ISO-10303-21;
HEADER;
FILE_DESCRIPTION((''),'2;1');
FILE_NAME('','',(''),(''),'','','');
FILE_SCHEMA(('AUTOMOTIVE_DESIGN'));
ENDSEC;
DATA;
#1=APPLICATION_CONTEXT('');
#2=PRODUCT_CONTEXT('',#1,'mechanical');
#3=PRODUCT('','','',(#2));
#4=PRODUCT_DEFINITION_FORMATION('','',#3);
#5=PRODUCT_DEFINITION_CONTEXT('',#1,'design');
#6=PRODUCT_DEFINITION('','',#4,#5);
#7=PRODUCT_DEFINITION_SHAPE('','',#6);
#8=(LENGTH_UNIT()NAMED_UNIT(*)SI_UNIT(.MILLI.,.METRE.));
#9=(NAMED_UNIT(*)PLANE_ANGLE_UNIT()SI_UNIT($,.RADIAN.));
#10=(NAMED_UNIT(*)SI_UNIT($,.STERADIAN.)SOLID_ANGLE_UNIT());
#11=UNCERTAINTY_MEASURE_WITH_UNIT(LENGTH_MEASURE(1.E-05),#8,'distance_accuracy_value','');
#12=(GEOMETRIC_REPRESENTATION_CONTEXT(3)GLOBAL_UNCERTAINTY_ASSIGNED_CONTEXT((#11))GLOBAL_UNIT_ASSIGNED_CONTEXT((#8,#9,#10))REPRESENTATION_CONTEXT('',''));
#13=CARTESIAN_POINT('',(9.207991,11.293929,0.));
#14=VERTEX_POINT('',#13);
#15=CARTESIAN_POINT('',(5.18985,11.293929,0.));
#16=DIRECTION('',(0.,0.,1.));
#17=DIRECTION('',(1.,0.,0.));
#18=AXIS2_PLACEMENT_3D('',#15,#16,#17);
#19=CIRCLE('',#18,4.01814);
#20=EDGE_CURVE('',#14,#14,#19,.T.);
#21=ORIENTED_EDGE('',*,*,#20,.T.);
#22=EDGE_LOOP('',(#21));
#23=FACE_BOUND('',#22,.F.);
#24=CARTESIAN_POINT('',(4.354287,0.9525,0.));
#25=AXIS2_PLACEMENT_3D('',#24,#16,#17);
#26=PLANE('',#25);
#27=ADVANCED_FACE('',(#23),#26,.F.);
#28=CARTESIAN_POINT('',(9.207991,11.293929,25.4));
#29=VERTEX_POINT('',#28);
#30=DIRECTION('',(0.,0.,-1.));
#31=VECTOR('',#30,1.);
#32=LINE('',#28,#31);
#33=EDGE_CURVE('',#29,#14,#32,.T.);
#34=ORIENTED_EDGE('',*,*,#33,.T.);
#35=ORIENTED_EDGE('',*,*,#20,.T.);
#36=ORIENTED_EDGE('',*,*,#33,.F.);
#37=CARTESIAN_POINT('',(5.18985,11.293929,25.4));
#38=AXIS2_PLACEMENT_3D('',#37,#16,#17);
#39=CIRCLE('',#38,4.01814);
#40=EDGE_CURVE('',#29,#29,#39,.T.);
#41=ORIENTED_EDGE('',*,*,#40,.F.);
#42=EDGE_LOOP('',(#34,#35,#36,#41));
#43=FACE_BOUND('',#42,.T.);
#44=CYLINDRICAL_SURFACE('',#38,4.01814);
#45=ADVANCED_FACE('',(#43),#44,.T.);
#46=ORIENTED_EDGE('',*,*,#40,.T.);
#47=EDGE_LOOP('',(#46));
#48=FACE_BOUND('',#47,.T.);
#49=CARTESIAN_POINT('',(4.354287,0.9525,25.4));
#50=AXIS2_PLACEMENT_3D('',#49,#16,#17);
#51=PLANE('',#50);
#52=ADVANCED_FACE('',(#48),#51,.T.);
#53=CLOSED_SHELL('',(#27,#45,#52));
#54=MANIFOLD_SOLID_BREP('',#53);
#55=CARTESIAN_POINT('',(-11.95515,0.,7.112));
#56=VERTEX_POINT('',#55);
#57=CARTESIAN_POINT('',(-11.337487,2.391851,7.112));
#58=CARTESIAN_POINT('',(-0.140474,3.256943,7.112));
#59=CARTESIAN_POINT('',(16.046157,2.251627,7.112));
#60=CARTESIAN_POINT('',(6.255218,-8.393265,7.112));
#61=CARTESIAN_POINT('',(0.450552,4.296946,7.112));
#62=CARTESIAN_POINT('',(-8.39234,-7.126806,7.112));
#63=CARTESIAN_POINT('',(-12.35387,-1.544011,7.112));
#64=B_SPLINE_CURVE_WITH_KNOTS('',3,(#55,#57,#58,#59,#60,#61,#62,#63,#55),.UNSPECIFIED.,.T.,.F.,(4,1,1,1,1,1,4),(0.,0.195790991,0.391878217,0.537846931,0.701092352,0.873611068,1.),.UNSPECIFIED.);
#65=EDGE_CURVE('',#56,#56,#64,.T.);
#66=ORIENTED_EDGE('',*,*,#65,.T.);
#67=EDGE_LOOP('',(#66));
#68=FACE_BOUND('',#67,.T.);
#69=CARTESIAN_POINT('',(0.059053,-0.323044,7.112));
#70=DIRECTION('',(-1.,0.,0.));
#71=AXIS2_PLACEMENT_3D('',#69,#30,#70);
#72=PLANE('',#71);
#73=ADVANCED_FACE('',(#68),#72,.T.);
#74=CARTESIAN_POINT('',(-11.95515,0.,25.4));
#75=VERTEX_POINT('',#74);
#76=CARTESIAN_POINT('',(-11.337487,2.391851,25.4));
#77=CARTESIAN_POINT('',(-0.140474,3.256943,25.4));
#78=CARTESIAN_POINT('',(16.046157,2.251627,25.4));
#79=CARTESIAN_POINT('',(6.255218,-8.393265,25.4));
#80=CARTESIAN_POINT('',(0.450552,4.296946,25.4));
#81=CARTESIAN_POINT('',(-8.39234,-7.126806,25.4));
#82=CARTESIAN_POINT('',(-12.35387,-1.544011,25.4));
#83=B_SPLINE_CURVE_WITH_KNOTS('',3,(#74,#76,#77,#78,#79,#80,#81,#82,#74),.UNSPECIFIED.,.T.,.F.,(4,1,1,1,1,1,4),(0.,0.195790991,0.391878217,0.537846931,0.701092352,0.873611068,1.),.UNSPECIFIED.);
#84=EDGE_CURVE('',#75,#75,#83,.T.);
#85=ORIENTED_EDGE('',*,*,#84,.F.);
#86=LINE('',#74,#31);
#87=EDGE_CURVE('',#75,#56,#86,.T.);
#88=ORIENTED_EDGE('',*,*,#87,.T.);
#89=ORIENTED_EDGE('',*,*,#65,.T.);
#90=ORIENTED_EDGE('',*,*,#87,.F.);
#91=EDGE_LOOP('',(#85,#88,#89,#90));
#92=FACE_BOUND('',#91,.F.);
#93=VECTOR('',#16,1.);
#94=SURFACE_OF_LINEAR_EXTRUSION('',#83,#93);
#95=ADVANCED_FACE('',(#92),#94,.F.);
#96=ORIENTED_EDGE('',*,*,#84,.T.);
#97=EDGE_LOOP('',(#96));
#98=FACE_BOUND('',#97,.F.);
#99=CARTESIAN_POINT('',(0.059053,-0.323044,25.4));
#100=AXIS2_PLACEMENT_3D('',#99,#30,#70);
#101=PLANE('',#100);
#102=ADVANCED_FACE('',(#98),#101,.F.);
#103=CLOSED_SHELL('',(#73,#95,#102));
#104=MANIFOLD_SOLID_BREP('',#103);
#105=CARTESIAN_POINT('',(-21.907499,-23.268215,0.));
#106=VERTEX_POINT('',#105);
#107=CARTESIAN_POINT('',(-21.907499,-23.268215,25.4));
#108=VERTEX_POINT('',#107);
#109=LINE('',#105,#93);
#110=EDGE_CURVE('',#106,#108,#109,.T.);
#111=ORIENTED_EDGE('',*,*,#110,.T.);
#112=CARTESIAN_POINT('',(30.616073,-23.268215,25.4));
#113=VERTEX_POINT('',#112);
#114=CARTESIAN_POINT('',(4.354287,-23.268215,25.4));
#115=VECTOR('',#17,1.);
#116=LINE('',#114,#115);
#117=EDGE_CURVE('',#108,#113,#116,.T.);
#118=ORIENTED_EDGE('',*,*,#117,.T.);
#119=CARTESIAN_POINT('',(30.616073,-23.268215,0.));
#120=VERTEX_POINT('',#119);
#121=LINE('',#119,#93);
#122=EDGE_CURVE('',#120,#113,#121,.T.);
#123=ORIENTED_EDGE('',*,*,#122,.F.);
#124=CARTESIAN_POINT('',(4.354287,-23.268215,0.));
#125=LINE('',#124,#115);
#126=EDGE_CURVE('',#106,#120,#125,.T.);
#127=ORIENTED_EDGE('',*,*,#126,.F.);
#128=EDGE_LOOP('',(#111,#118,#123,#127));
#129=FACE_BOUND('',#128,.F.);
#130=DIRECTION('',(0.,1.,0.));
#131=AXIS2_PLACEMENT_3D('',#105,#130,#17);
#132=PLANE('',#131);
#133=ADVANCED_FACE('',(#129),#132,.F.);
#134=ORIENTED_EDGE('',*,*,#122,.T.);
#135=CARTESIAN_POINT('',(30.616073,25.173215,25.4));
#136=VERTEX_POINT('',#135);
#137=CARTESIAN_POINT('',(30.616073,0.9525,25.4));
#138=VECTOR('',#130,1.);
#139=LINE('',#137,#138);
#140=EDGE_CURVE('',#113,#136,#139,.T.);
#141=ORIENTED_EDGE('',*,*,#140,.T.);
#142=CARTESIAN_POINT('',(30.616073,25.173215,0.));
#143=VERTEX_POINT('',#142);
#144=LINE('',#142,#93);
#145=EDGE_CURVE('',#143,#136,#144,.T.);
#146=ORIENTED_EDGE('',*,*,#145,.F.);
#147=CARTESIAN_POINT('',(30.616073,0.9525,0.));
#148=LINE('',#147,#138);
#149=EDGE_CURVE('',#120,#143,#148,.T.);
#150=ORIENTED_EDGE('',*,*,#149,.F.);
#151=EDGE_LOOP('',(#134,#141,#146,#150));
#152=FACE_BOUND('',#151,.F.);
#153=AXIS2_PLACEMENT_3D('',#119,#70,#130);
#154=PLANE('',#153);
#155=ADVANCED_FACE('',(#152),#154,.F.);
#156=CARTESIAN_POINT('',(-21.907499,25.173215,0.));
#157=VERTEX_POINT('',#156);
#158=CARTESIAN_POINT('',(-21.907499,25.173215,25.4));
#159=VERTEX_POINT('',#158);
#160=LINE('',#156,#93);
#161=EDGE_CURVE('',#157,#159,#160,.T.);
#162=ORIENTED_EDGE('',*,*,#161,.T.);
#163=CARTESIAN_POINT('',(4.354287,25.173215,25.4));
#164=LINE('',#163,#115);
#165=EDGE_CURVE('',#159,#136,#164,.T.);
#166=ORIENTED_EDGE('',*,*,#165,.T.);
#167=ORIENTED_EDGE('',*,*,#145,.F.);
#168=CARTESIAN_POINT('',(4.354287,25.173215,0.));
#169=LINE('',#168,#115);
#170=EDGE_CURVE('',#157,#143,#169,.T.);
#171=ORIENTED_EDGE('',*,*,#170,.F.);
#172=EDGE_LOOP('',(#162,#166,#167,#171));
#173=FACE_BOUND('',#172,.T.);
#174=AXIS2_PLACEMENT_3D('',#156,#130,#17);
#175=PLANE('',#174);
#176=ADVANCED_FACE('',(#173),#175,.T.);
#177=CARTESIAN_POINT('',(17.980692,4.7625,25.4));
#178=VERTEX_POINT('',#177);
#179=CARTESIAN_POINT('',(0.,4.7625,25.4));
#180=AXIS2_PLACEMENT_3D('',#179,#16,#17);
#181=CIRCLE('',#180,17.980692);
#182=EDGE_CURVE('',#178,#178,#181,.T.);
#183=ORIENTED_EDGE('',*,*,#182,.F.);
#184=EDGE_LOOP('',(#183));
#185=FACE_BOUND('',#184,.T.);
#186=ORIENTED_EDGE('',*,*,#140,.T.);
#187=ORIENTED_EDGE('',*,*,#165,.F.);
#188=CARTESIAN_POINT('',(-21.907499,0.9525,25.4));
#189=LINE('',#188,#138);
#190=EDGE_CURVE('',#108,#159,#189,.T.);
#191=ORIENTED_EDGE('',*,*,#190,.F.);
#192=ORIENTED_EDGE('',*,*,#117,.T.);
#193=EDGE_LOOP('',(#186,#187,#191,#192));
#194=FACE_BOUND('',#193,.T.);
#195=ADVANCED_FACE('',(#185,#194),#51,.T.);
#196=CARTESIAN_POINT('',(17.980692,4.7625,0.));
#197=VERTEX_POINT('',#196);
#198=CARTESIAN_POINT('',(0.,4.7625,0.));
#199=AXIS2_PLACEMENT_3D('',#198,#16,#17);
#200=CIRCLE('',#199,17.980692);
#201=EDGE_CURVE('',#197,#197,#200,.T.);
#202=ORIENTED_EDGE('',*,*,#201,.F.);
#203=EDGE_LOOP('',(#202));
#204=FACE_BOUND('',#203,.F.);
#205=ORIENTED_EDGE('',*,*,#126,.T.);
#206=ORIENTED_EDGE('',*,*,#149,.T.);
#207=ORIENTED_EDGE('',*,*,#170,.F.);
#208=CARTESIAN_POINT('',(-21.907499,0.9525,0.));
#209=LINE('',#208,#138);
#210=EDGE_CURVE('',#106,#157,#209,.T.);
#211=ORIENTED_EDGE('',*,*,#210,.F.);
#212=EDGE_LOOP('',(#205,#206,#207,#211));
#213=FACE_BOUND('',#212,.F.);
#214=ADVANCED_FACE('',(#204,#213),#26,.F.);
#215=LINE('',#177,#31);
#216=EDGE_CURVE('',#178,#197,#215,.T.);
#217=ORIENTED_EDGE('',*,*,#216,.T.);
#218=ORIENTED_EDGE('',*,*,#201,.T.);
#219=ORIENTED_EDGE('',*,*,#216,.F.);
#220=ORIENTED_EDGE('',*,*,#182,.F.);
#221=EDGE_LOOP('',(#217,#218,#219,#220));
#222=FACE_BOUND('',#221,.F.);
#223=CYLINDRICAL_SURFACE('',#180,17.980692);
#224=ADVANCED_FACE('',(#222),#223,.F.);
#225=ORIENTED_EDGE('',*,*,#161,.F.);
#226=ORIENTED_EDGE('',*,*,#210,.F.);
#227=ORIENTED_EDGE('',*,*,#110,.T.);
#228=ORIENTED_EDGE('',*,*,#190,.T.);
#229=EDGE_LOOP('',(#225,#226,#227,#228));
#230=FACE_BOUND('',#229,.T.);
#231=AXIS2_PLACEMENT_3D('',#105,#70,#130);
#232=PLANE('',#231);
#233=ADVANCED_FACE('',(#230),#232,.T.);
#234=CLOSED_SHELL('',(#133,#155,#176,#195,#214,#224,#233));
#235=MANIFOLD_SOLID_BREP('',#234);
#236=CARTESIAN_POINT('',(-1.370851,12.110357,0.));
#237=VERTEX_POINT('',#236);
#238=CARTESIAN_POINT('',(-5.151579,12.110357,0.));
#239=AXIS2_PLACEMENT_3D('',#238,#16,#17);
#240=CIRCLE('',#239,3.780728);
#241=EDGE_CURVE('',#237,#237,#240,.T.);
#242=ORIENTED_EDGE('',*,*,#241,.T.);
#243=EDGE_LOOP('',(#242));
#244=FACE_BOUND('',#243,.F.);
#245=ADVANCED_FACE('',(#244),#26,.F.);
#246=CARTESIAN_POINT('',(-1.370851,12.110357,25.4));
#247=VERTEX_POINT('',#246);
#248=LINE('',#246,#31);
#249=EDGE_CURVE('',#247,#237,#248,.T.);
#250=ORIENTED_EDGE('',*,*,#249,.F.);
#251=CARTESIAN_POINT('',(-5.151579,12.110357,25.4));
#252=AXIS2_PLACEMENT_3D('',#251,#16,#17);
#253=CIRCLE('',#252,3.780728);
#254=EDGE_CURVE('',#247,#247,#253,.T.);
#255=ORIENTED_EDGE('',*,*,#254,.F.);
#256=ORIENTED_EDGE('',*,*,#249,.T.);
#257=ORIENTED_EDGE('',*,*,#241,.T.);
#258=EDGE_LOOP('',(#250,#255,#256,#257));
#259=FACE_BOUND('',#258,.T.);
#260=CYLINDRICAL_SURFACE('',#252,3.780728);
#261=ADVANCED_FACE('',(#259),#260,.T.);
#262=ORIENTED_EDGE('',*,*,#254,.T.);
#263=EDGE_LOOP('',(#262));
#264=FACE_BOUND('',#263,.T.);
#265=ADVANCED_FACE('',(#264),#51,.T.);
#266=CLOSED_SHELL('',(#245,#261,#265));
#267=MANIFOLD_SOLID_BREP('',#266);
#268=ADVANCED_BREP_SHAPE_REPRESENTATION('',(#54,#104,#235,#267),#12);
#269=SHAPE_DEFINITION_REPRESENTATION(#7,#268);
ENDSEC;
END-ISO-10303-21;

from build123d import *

# Parameters (mm, degrees)
F0_W     = 52.5235719979
F0_H     = 48.4414305538
F1_DEPTH = 25.4
F3_R     = 17.9806924125
F3_R_2   = 3.780727698
F3_R_3   = 4.0181404967
F6_DEPTH = 27.432
F7_DEPTH = 18.288


# Not quite as in the source:
# - the program builds the solid bodies; features that only make, move or delete a surface that nothing else refers to are left out


with BuildPart() as f1:
    # F0 (on Top) → F1 (new body)
    with BuildSketch(Plane.XY):
        with Locations((4.3542869389, 0.9524999186)):
            Rectangle(F0_W, F0_H)
    extrude(amount=F1_DEPTH)

    # F3 (on face) → F6 (cut)
    with BuildSketch(Plane.XY.offset(25.4)):
        with Locations((0, 4.7625000589)):
            Circle(F3_R)
        with Locations((-5.1515786909, 12.1103571728)):
            Circle(F3_R_2, mode=Mode.SUBTRACT)
        with Locations((5.1898504607, 11.2939290702)):
            Circle(F3_R_3, mode=Mode.SUBTRACT)
    extrude(amount=-F6_DEPTH, mode=Mode.SUBTRACT)


with BuildPart() as f7:
    # F4 (on face) → F7 (new body)
    with BuildSketch(Plane.XY.offset(25.4)):
        with BuildLine():
            add(Edge.make_bspline(
                [(-11.9551504031, 0), (-11.3374873906, 2.3918507841), (-0.1404740389, 3.2569434634), (16.0461571526, 2.2516272688), (6.2552175699, -8.3932651273), (0.4505515588, 4.2969461524), (-8.3923398431, -7.1268055014), (-12.3538703235, -1.5440111115), (-11.9551504031, 0)],
                knots=[0, 0, 0, 0, 0.1957909913, 0.3918782168, 0.5378469307, 0.701092352, 0.873611068, 1, 1, 1, 1], degree=3))
        make_face()
    extrude(amount=-F7_DEPTH)


solid = Compound([f1.part, f7.part])
